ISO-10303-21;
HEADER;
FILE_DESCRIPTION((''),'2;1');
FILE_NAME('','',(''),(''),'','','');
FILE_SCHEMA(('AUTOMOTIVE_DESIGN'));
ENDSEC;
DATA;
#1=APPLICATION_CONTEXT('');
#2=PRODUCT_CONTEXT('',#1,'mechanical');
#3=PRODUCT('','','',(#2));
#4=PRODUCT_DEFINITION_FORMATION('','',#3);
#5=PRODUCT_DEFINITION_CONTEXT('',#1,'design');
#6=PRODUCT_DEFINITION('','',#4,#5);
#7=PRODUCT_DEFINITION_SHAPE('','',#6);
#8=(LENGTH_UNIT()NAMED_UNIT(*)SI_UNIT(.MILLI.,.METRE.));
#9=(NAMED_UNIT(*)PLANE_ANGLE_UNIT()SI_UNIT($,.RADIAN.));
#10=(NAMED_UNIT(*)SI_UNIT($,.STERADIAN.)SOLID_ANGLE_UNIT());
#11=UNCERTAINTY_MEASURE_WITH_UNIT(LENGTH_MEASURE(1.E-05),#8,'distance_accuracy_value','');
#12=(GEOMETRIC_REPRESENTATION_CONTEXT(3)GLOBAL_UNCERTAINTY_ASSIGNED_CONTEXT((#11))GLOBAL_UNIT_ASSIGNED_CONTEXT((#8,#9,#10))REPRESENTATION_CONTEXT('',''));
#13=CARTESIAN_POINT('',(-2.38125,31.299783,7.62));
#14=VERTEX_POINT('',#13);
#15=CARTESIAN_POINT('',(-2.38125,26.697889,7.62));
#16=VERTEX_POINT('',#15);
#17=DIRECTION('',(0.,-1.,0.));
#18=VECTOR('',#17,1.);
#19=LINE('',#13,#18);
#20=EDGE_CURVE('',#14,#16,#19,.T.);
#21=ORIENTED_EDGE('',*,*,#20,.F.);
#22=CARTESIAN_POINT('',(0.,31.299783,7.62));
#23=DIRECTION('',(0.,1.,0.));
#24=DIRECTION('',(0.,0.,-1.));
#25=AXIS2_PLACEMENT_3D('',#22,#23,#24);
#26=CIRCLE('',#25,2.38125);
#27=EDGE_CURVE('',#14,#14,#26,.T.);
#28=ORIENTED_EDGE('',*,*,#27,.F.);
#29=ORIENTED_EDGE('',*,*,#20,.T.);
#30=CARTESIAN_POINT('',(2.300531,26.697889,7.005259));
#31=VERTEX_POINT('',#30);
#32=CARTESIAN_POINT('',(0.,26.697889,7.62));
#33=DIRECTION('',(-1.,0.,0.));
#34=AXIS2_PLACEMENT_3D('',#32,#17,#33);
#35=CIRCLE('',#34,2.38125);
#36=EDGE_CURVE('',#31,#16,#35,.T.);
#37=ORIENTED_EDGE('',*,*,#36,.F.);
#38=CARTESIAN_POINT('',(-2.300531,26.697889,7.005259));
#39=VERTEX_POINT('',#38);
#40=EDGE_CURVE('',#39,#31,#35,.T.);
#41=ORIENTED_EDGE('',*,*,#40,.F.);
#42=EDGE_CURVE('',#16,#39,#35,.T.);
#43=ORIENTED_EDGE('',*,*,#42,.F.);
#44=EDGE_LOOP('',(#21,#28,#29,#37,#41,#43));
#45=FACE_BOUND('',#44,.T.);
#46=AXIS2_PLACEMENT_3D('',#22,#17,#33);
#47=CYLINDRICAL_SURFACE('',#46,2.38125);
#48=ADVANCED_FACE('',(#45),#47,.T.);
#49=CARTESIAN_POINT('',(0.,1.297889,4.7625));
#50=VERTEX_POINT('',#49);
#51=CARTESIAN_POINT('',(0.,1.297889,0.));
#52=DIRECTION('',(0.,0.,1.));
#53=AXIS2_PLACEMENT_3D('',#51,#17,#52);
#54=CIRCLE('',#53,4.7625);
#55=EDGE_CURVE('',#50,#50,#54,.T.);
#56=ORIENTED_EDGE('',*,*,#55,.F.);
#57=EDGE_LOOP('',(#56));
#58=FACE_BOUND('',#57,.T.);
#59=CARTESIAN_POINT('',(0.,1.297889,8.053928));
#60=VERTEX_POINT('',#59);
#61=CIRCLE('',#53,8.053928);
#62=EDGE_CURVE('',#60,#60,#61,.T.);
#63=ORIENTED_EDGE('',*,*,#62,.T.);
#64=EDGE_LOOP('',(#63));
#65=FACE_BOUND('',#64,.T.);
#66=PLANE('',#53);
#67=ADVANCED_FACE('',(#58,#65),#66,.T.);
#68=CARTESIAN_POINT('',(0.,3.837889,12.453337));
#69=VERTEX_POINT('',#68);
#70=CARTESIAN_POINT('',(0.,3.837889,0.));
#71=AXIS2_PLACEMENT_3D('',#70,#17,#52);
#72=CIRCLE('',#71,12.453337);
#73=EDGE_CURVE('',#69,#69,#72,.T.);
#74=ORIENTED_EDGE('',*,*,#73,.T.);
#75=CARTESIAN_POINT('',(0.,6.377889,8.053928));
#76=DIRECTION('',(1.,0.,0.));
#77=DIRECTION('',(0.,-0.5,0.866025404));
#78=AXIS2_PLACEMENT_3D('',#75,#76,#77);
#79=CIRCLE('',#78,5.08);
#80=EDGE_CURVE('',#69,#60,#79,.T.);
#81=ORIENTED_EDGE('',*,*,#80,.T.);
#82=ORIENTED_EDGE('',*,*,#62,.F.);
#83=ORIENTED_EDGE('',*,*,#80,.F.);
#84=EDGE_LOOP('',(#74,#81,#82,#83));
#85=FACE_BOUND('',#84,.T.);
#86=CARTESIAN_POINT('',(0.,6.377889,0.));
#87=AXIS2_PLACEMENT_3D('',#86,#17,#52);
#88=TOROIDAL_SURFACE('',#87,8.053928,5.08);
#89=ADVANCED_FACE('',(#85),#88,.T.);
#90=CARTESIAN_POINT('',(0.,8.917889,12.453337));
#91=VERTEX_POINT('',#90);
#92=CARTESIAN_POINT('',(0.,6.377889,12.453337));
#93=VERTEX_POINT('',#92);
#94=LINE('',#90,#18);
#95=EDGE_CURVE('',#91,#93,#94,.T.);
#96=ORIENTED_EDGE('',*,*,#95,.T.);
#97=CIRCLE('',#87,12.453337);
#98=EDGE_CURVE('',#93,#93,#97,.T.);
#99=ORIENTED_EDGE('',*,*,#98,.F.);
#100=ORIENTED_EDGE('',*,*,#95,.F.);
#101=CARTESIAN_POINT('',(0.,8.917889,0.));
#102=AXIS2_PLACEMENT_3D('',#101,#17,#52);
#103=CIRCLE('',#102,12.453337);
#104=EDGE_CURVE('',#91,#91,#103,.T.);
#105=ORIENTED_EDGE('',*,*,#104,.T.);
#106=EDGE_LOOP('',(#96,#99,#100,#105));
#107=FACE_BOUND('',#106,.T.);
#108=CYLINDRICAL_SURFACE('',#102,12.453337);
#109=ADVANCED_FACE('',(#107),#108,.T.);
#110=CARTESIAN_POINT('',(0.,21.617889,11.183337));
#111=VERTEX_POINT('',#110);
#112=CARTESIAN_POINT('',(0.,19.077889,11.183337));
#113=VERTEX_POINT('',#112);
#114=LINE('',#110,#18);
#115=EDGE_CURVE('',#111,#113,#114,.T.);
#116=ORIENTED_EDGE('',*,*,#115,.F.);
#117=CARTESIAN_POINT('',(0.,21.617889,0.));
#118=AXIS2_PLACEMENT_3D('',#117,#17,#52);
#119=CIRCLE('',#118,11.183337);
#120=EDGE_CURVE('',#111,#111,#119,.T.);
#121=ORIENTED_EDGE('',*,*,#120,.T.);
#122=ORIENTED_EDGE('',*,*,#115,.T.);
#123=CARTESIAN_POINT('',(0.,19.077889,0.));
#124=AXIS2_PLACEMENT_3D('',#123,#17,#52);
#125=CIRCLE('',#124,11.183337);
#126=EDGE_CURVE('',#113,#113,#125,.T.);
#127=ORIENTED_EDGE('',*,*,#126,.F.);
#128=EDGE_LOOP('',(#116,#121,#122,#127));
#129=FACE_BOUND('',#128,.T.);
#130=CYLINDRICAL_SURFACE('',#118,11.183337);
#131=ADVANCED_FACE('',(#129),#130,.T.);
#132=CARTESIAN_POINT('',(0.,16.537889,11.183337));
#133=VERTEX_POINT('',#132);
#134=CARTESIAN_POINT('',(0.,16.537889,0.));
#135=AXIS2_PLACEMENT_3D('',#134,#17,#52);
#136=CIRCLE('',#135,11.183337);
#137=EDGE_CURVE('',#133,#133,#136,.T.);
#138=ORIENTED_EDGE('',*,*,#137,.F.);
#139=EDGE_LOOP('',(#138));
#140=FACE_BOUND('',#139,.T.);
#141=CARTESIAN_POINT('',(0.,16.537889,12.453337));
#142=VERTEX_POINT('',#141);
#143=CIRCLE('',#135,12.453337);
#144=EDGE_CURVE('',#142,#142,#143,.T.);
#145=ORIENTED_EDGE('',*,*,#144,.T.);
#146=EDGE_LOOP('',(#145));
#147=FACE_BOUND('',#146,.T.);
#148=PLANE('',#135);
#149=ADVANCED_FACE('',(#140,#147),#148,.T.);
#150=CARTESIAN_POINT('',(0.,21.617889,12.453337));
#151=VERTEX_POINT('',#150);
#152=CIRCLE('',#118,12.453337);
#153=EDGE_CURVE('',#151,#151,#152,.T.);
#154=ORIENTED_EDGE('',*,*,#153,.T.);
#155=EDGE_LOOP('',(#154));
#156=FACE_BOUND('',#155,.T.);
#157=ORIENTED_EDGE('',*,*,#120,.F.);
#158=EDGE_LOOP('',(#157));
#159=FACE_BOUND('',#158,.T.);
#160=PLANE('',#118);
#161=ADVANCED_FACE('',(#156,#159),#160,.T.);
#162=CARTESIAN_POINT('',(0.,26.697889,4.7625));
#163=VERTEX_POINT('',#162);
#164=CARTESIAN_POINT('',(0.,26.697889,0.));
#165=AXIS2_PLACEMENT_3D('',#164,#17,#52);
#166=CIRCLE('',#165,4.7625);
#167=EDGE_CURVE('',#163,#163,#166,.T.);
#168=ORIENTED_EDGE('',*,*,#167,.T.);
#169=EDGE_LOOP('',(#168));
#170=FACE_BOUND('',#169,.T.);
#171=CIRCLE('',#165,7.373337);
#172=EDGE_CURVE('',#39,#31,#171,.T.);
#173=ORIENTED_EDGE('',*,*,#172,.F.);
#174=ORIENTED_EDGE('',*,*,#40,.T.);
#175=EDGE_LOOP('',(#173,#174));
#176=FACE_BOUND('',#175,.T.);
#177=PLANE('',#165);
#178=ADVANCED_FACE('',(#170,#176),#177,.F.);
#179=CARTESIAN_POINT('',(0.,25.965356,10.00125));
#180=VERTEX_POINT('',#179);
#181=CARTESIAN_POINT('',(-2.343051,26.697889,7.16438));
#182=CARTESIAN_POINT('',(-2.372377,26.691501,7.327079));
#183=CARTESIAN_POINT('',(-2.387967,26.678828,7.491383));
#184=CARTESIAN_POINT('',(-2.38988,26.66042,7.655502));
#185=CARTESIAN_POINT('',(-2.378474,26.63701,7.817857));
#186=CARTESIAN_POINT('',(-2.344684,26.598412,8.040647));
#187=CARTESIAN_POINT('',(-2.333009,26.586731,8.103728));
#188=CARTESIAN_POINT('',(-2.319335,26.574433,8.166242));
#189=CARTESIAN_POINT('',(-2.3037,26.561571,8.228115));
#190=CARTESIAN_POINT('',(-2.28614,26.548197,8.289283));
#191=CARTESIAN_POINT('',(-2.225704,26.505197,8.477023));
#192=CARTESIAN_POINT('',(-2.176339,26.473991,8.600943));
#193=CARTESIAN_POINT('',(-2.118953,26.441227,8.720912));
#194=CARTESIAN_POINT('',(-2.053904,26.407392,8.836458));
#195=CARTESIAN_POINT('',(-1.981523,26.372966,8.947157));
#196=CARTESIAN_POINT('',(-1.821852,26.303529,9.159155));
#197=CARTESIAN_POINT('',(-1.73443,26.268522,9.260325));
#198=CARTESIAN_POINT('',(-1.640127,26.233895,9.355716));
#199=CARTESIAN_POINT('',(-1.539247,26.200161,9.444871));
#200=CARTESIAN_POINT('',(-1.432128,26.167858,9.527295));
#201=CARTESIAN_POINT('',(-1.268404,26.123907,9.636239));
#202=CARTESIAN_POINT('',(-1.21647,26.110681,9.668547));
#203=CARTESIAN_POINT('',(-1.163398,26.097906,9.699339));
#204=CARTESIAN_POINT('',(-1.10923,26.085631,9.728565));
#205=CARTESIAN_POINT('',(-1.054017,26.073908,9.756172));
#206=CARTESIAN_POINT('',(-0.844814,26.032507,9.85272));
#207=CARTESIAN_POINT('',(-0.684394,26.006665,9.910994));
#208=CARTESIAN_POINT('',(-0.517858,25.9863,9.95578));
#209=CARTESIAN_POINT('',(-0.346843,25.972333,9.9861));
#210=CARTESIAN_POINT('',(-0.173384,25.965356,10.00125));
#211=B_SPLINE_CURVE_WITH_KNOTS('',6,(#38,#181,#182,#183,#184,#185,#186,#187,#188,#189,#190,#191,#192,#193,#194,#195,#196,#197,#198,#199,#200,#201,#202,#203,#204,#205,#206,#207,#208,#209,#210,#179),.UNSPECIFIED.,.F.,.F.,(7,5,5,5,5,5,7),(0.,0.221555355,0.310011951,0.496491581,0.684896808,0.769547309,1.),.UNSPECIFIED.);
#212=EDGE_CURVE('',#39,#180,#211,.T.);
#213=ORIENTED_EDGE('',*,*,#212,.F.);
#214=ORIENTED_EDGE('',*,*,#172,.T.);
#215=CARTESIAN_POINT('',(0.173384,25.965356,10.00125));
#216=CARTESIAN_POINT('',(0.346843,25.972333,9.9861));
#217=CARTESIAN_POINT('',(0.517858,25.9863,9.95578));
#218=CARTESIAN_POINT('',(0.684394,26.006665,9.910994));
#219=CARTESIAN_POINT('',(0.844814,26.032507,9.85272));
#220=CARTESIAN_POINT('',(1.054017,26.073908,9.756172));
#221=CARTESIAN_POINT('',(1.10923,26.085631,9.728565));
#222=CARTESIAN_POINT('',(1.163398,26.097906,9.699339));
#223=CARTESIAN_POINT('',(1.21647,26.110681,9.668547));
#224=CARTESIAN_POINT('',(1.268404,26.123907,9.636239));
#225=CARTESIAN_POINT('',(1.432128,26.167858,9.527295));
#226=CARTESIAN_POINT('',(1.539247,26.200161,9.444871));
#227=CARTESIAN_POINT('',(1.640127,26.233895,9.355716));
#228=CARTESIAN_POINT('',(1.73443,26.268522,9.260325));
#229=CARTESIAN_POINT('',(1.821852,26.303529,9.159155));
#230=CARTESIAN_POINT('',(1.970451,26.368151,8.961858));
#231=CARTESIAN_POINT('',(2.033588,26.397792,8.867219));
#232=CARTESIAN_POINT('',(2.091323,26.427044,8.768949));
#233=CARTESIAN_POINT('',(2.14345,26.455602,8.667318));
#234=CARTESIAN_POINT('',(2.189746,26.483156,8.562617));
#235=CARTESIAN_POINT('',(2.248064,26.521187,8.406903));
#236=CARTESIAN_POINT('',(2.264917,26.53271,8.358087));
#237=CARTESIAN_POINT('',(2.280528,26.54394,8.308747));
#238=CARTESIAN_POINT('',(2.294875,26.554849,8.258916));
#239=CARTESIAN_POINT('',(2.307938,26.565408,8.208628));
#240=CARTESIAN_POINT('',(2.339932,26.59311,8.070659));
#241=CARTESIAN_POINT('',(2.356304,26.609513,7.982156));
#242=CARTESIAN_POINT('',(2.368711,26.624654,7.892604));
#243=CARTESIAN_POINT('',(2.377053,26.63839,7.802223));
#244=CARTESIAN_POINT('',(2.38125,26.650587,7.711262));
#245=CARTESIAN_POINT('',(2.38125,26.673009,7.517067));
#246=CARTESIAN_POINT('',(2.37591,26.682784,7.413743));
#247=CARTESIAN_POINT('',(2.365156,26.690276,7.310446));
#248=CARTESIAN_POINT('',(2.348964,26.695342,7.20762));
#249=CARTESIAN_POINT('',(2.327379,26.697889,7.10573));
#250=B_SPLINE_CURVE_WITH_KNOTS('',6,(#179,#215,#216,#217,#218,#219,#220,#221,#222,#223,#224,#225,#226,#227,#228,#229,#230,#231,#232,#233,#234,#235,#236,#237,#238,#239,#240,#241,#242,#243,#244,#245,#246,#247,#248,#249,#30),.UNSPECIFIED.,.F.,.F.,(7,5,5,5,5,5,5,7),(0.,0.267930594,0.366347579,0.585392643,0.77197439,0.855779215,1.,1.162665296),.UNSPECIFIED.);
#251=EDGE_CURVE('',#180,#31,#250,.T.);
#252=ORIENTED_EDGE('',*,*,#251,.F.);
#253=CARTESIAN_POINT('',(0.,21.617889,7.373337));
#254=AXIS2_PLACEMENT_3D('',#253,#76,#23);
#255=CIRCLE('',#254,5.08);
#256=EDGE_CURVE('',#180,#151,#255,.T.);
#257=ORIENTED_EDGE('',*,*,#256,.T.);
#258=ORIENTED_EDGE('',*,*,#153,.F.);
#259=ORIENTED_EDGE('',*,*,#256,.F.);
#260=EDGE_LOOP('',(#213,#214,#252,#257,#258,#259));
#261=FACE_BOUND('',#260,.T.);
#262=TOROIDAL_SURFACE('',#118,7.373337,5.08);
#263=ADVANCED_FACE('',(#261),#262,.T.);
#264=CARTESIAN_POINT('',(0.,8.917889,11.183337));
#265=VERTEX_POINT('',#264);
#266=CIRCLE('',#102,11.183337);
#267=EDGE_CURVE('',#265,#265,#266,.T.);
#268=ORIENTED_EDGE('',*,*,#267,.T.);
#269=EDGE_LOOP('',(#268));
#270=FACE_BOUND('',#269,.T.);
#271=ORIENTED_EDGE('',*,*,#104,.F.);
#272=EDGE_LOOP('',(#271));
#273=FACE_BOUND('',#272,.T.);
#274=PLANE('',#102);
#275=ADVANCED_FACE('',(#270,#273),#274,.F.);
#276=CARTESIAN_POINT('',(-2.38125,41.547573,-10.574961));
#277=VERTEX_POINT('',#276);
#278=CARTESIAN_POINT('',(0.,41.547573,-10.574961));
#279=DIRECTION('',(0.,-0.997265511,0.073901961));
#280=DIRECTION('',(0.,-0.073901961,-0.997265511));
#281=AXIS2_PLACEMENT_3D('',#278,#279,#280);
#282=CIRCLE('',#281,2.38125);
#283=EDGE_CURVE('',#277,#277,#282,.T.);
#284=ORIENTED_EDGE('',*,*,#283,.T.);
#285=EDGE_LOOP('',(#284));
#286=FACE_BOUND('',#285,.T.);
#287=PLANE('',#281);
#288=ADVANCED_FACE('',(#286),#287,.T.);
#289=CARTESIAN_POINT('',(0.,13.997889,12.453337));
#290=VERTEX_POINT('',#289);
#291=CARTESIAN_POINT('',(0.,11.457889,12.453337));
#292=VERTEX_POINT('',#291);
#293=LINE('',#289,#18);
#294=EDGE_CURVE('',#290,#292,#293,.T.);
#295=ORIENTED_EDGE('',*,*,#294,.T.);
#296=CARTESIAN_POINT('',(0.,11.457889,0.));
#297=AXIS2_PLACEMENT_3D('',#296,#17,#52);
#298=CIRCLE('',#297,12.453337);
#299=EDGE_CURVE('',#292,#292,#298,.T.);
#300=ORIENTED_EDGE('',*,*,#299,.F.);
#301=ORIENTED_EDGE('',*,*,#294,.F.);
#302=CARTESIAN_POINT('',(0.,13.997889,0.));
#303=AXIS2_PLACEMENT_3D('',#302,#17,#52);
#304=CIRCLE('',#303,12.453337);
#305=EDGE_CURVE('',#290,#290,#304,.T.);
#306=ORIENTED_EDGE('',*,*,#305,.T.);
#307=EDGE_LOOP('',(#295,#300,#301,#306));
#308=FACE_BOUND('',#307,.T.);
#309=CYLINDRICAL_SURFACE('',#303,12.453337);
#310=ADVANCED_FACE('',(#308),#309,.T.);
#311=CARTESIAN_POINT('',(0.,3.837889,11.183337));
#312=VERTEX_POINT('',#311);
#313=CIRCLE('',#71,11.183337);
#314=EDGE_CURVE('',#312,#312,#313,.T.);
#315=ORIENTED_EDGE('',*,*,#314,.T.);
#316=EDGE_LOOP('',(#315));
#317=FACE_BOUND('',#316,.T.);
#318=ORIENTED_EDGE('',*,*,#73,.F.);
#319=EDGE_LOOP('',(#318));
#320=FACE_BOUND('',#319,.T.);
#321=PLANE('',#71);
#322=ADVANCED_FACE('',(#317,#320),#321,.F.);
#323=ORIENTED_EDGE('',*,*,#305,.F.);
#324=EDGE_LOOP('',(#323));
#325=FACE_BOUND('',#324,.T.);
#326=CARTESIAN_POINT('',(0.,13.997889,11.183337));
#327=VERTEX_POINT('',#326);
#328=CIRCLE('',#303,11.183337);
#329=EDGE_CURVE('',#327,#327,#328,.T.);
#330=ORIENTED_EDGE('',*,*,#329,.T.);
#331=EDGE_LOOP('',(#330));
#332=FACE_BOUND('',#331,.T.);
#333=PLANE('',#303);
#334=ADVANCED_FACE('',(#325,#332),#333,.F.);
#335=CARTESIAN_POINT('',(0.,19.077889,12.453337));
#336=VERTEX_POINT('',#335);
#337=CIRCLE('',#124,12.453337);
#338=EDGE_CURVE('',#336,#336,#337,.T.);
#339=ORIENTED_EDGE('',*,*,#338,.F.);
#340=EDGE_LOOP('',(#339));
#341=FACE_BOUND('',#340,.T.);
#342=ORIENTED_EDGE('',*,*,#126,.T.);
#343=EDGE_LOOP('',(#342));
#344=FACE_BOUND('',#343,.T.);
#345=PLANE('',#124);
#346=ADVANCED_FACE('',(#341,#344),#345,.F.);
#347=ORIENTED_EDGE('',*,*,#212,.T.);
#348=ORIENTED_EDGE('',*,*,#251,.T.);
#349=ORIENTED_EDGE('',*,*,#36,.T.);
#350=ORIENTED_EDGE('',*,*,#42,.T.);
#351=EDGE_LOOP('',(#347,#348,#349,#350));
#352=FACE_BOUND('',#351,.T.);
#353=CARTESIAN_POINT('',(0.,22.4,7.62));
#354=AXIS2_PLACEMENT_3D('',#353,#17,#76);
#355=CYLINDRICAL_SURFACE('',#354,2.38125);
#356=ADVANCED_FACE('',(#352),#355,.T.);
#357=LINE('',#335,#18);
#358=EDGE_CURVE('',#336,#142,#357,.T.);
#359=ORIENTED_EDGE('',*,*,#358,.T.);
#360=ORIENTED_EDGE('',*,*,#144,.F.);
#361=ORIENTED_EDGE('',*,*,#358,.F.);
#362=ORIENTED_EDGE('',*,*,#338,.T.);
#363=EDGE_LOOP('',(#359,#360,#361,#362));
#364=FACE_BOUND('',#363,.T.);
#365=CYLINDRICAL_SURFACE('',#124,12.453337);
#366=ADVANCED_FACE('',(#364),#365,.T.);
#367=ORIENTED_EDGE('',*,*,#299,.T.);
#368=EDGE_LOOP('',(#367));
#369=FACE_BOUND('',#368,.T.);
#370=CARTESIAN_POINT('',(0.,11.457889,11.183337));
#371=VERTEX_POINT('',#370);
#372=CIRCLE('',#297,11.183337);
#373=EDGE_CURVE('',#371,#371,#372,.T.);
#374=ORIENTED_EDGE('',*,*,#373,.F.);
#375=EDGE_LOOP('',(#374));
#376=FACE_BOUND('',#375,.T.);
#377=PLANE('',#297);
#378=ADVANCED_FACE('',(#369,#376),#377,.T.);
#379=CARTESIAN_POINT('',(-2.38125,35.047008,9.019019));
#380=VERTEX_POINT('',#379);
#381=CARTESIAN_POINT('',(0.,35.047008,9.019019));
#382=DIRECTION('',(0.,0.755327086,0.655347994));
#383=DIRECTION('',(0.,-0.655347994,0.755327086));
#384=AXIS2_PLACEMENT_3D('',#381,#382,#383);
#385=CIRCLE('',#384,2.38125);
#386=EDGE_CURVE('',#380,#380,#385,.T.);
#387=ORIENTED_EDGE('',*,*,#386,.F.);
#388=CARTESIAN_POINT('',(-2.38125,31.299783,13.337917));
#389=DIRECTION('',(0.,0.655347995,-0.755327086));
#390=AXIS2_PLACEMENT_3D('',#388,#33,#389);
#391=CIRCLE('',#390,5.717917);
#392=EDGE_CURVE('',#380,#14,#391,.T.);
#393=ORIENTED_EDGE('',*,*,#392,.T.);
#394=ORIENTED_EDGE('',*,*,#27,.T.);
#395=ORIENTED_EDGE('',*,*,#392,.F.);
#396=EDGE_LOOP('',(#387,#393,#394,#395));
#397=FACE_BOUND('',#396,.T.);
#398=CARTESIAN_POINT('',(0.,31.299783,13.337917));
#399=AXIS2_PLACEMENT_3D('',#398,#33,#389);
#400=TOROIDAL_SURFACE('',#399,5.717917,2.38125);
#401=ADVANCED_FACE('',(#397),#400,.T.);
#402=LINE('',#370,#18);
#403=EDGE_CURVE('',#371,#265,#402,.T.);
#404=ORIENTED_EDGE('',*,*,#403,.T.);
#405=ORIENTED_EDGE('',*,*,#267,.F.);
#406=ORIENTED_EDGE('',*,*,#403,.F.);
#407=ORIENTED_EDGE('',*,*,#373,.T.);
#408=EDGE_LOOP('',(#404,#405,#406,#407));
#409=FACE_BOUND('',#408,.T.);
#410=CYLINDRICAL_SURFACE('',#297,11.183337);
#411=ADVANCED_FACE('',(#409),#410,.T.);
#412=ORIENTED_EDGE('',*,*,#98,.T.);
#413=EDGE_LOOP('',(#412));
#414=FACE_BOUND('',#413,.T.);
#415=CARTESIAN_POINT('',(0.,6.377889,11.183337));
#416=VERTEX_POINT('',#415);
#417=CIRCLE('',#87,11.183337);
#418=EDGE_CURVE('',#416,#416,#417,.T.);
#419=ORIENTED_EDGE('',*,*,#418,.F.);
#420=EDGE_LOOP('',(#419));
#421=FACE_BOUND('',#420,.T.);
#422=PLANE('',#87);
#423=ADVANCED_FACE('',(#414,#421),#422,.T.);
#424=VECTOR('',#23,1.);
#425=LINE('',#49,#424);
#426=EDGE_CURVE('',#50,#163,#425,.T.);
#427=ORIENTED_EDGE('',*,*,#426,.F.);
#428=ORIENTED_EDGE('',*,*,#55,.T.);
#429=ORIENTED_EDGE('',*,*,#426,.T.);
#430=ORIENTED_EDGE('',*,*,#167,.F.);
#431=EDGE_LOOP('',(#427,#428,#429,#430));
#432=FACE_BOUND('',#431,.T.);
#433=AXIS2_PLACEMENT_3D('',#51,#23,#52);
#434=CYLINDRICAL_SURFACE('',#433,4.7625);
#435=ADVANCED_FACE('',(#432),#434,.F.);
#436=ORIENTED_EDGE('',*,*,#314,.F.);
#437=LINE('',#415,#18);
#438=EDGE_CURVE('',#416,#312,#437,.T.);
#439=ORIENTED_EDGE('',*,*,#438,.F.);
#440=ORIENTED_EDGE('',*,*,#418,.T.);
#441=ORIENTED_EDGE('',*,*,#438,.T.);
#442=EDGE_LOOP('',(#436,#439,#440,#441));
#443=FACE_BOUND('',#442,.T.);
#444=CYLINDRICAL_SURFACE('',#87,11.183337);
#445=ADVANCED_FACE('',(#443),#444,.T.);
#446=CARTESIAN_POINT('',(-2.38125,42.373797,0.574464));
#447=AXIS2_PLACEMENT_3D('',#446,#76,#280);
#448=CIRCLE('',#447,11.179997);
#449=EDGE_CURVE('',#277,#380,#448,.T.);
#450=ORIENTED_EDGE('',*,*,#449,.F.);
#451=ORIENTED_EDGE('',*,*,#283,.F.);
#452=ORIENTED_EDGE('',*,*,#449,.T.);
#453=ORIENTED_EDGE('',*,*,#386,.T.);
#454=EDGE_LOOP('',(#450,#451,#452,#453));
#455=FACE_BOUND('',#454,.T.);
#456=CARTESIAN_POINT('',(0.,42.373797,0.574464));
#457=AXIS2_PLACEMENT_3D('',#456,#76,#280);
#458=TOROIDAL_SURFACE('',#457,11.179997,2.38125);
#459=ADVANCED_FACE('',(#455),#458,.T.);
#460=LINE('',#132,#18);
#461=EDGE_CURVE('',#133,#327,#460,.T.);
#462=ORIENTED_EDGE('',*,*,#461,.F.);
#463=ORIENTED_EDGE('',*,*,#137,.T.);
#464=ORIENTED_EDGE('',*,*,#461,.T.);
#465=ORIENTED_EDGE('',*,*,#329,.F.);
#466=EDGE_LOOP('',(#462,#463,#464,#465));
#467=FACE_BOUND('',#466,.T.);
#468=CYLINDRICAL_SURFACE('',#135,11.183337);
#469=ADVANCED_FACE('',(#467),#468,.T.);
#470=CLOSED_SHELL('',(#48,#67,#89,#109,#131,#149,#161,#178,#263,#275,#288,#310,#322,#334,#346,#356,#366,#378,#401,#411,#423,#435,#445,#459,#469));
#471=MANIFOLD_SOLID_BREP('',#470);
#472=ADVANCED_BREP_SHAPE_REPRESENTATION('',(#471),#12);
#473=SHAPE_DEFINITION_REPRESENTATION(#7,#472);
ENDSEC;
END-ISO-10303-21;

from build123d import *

# Parameters (mm, degrees)
F2_R        = 2.38125
F5_S5_R     = 2.38125
F5_T6_DEPTH = 21


# Not quite as in the source:
# - a fillet or chamfer that OpenCascade refuses, or shapes differently, is made with other operations: its cross-section is extruded or revolved along the edge and cut away or added


with BuildPart() as f1:
    # F0 (on Right) → F1 (revolve)
    with BuildSketch(Plane.YZ):
        Polygon((1.2978891239, 12.4533368552), (1.2978891239, 4.7625), (26.6978891239, 4.7625), (26.6978891239, 12.4533368552), (21.6178891239, 12.4533368552), (21.6178891239, 11.1833368552), (19.0778891239, 11.1833368552), (19.0778891239, 12.4533368552), (16.5378891239, 12.4533368552), (16.5378891239, 11.1833368552), (13.9978891239, 11.1833368552), (13.9978891239, 12.4533368552), (11.4578891239, 12.4533368552), (11.4578891239, 11.1833368552), (8.9178891239, 11.1833368552), (8.9178891239, 12.4533368552), (6.3778891239, 12.4533368552), (6.3778891239, 11.1833368552), (3.8378891239, 11.1833368552), (3.8378891239, 12.4533368552), align=None)
    revolve(axis=Axis((0, 14.6730239503, 0), (0, -1, 0)))

    # F4: sweep along a path in F3
    with BuildLine(Plane.YZ) as f4_path:
        ThreePointArc((41.5942855179, -9.9446065724), (52.3851323155, 3.8958588473), (35.4612426397, 8.5415897783))
        ThreePointArc((35.4612426397, 8.5415897783), (33.5207988127, 7.3890018952), (31.2997828747, 6.9879167713))
        Line((31.2997828747, 6.9879167713), (26.6969297081, 6.9879167713))
    # F2 (on face) → F4 (sweep)
    with BuildSketch(Plane(origin=(0, 26.6978891239, 0), x_dir=(-1, 0, 0), z_dir=(0, 1, 0))):
        with Locations((0, 7.62)):
            Circle(F2_R)
    sweep(path=f4_path.line)

    # F5: fillet of radius 5.08 on 2 edges, made by hand


with BuildPart() as f5_tool2:
    # F5_s3 → F5_t4 (revolve)
    with BuildSketch(Plane.YZ):
        with BuildLine():
            ThreePointArc((26.6978891239, 7.3733368552), (25.2099915723, 10.9654393036), (21.6178891239, 12.4533368552))
            Line((21.6178891239, 12.4533368552), (26.6978891239, 12.4533368552))
            Line((26.6978891239, 12.4533368552), (26.6978891239, 7.3733368552))
        make_face()
    revolve(axis=Axis((0, 26.6978891239, 0), (0, -1, 0)))

    # F5_s5 → F5_t6 (cut, symmetric)
    with BuildSketch(Plane.XZ.offset(-22.4)):
        with Locations((0, 7.62)):
            Circle(F5_S5_R)
    extrude(amount=F5_T6_DEPTH, both=True, mode=Mode.SUBTRACT)


with BuildPart() as f1_1:
    add(f1.part)

    # F5_t1: cut F5_tool2
    add(f5_tool2.part, mode=Mode.SUBTRACT)

    # F5_s7 → F5_t8 (revolve, cut)
    with BuildSketch(Plane.YZ):
        with BuildLine():
            ThreePointArc((3.8378891239, 12.4533368552), (1.9784800726, 10.5939278039), (1.2978891239, 8.0539278039))
            Line((1.2978891239, 8.0539278039), (1.2978891239, 12.4533368552))
            Line((1.2978891239, 12.4533368552), (3.8378891239, 12.4533368552))
        make_face()
    revolve(axis=Axis((0, 1.2978891239, 0), (0, -1, 0)), mode=Mode.SUBTRACT)


solid = f1_1.part
